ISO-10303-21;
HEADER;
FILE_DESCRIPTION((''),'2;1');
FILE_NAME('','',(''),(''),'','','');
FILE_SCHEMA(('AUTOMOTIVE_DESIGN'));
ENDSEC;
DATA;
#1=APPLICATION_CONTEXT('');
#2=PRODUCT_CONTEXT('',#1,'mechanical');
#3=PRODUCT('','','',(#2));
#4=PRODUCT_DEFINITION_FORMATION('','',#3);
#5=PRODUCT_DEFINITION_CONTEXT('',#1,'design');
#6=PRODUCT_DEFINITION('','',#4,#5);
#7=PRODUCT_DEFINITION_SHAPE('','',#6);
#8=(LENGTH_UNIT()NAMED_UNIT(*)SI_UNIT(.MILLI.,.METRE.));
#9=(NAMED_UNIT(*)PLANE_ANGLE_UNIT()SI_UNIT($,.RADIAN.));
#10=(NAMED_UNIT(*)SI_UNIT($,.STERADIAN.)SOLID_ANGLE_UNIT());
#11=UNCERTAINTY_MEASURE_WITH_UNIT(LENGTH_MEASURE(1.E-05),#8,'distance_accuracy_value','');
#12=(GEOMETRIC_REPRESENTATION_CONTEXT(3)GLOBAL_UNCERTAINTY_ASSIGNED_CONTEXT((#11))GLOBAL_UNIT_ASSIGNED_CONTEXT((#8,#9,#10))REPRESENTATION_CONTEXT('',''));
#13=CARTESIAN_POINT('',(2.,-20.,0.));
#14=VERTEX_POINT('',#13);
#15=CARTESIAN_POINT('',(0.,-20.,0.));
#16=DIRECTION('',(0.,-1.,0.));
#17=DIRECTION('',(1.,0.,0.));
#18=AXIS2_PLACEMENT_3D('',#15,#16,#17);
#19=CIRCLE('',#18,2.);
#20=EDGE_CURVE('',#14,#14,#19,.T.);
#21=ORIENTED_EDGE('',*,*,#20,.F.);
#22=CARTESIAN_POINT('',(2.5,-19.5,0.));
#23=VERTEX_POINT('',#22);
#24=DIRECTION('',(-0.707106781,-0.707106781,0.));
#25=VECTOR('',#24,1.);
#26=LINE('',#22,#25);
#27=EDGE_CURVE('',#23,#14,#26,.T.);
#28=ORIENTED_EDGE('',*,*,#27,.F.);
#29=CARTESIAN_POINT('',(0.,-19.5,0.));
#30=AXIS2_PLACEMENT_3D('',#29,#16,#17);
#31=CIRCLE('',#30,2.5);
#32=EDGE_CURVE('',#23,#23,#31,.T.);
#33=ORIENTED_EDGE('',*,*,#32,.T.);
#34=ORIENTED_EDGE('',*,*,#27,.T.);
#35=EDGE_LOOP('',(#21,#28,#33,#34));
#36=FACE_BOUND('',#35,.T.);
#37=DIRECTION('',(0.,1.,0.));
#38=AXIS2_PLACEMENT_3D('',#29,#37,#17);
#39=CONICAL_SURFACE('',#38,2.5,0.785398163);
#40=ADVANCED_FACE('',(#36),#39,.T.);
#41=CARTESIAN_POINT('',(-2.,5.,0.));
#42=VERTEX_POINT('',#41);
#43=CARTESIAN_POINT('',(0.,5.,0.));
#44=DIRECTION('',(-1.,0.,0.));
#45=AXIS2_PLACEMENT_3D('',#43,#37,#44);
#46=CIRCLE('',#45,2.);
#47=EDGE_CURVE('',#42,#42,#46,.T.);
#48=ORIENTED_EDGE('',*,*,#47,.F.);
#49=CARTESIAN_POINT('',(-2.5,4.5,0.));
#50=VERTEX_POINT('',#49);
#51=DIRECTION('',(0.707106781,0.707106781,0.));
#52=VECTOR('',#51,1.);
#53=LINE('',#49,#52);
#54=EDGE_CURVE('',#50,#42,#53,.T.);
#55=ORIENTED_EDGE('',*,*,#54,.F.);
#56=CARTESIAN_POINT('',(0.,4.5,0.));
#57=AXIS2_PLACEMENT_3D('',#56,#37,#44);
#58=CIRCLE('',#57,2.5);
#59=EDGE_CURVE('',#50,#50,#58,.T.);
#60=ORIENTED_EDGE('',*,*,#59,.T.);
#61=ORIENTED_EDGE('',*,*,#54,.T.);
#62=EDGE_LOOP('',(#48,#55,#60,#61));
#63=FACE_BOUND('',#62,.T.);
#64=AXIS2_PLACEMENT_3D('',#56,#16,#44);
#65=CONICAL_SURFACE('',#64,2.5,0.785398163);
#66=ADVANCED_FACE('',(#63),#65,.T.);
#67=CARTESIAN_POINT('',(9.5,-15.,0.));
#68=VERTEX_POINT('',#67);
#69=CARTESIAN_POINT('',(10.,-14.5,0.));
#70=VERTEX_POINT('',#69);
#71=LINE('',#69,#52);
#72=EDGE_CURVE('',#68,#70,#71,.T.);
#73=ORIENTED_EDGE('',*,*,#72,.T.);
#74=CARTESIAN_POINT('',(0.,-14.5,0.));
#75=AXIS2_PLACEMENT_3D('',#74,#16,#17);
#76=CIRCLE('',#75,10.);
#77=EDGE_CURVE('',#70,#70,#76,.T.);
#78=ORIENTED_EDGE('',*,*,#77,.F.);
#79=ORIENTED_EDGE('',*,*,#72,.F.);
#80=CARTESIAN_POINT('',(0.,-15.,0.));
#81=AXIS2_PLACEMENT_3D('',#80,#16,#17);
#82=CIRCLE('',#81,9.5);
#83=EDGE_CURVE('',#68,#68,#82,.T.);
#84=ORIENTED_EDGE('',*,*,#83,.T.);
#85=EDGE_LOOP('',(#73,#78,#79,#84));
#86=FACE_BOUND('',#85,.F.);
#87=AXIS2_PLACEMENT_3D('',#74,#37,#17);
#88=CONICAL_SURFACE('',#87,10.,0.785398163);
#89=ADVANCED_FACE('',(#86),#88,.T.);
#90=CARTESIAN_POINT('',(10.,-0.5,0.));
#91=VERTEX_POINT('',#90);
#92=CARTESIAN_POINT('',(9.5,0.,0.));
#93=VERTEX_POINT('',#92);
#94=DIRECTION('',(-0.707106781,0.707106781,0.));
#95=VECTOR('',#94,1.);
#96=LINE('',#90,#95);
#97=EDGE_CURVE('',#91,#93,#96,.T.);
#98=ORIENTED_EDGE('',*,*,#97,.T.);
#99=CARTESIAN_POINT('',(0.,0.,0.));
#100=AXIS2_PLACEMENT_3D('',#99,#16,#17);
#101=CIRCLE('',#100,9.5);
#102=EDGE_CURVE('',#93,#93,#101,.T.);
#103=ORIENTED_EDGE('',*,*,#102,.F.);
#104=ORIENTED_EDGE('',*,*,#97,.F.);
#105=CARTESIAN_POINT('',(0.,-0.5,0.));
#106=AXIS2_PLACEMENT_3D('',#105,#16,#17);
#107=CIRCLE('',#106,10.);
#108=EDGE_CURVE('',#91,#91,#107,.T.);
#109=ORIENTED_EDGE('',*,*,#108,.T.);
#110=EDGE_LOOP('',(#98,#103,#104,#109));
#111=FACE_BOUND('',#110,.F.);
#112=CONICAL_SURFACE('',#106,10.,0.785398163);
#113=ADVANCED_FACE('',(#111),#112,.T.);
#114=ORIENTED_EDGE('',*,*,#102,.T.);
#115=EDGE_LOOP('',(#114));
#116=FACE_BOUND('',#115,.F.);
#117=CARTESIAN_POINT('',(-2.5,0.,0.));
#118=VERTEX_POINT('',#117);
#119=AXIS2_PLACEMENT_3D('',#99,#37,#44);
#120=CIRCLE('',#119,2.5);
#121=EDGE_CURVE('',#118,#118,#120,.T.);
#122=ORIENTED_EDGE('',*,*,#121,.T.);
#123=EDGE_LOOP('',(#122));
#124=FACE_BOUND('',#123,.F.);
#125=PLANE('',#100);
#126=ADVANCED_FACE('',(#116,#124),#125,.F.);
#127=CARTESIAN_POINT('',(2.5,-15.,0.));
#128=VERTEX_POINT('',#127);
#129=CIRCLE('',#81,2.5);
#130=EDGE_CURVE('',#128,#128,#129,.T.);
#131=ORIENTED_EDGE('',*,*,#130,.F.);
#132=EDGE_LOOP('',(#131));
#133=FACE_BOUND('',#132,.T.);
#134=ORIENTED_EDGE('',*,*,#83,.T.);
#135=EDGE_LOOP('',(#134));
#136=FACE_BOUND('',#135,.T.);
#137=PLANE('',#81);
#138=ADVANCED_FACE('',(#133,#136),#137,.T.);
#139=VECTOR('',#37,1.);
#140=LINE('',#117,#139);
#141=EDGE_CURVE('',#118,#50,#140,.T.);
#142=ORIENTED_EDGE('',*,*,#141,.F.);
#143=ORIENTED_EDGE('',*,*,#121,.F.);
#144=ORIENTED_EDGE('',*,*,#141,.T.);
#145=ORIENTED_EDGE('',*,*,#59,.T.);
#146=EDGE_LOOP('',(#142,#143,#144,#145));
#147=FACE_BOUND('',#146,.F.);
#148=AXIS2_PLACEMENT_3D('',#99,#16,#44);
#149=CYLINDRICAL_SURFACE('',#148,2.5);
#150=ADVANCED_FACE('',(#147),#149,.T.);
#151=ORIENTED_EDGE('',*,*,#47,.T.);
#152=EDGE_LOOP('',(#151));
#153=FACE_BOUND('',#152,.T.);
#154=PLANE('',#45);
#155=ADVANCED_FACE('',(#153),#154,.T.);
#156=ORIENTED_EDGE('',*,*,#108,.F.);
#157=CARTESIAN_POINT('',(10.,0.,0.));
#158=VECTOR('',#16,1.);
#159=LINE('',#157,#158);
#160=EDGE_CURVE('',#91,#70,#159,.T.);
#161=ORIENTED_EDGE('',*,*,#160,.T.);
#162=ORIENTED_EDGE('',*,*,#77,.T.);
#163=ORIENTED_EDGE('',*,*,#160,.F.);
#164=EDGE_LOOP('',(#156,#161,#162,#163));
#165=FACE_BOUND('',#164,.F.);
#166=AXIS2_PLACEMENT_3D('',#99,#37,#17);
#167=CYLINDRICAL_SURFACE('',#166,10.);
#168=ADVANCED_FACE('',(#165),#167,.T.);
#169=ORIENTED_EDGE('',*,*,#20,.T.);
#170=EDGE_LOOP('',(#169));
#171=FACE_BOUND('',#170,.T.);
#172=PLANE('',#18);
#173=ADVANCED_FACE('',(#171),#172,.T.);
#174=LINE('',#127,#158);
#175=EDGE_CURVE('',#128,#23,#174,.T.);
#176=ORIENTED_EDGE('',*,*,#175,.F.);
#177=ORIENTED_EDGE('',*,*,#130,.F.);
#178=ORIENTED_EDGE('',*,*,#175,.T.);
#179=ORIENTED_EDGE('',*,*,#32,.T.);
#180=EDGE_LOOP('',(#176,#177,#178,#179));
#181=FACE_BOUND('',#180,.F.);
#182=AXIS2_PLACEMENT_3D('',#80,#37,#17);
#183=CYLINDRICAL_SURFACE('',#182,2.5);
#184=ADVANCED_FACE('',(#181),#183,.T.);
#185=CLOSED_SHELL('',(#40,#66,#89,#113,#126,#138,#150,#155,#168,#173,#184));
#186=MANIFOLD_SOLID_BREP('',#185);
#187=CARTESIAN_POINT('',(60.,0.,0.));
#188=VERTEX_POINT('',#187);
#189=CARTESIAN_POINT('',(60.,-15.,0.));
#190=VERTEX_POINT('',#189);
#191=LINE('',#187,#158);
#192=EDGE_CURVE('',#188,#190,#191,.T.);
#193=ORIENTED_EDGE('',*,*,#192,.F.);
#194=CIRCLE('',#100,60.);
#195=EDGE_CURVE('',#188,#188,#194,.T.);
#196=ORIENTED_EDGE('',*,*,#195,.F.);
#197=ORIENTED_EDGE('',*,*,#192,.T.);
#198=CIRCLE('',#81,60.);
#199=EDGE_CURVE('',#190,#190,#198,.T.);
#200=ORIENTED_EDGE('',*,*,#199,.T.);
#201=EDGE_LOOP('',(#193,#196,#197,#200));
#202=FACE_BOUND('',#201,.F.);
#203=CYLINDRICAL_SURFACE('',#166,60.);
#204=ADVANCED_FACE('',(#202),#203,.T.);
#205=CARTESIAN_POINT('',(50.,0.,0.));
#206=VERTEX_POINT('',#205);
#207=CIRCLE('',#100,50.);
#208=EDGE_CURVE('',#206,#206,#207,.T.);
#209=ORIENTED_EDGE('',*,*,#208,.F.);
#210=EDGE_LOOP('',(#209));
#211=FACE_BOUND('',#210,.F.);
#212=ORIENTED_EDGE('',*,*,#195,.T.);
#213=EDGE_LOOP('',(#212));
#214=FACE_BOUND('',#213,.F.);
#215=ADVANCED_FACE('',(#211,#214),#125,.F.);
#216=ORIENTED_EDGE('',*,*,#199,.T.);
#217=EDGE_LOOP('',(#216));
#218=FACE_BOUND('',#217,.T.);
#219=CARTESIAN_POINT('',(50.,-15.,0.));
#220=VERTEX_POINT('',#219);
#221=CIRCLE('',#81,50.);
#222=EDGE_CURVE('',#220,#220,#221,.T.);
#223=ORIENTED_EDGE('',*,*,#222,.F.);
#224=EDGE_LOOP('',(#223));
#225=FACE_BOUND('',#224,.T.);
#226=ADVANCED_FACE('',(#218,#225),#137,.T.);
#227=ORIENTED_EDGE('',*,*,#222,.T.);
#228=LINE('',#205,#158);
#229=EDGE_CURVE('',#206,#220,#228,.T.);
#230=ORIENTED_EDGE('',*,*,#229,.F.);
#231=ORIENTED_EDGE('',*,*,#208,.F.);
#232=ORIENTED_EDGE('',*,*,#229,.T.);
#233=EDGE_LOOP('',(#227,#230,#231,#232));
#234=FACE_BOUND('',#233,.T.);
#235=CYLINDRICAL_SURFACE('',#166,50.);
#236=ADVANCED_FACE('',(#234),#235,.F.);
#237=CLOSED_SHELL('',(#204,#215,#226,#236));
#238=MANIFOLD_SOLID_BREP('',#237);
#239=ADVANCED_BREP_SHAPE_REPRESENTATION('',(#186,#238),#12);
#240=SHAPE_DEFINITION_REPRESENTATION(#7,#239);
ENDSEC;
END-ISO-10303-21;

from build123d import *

# Parameters (mm, degrees)
F0_R     = 60
F0_R_2   = 50
F1_DEPTH = 15
F0_R_3   = 10
F2_R     = 2.5
F3_DEPTH = 5
F4_R     = 2.5
F5_DEPTH = 5
F6_SIZE  = 0.5
F7_SIZE  = 0.5
F8_SIZE  = 0.5


# Not quite as in the source:
# - a feature names something its author has since deleted; it is built from what else it names


with BuildPart() as f1:
    # F0 (on Front) → F1 (new body)
    with BuildSketch(Plane.XZ):
        Circle(F0_R)
        Circle(F0_R_2, mode=Mode.SUBTRACT)
    extrude(amount=F1_DEPTH)


with BuildPart() as f1b:
    # F0 (on Front) → F1, piece 2 (new body)
    with BuildSketch(Plane.XZ):
        Circle(F0_R_3)
    extrude(amount=F1_DEPTH)

    # F2 (on face) → F3 (join)
    with BuildSketch(Plane.XZ.offset(15)):
        Circle(F2_R)
    extrude(amount=F3_DEPTH)

    # F4 (on face) → F5 (join)
    with BuildSketch(Plane(origin=(0, 0, 0), x_dir=(-1, 0, 0), z_dir=(0, 1, 0))):
        Circle(F4_R)
    extrude(amount=F5_DEPTH)

    # F6
    f6_edges = [f1b.edges().sort_by_distance(p)[0] for p in [
        (-2.5, -20, 0),
    ]]
    chamfer(f6_edges, length=F6_SIZE)

    # F7
    f7_edges = [f1b.edges().sort_by_distance(p)[0] for p in [
        (10, -7.5, 0),
        (-10, 0, 0),
        (-10, -15, 0),
    ]]
    chamfer(f7_edges, length=F7_SIZE)

    # F8
    f8_edges = [f1b.edges().sort_by_distance(p)[0] for p in [
        (2.5, 5, 0),
    ]]
    chamfer(f8_edges, length=F8_SIZE)


solid = Compound([f1.part, f1b.part])
